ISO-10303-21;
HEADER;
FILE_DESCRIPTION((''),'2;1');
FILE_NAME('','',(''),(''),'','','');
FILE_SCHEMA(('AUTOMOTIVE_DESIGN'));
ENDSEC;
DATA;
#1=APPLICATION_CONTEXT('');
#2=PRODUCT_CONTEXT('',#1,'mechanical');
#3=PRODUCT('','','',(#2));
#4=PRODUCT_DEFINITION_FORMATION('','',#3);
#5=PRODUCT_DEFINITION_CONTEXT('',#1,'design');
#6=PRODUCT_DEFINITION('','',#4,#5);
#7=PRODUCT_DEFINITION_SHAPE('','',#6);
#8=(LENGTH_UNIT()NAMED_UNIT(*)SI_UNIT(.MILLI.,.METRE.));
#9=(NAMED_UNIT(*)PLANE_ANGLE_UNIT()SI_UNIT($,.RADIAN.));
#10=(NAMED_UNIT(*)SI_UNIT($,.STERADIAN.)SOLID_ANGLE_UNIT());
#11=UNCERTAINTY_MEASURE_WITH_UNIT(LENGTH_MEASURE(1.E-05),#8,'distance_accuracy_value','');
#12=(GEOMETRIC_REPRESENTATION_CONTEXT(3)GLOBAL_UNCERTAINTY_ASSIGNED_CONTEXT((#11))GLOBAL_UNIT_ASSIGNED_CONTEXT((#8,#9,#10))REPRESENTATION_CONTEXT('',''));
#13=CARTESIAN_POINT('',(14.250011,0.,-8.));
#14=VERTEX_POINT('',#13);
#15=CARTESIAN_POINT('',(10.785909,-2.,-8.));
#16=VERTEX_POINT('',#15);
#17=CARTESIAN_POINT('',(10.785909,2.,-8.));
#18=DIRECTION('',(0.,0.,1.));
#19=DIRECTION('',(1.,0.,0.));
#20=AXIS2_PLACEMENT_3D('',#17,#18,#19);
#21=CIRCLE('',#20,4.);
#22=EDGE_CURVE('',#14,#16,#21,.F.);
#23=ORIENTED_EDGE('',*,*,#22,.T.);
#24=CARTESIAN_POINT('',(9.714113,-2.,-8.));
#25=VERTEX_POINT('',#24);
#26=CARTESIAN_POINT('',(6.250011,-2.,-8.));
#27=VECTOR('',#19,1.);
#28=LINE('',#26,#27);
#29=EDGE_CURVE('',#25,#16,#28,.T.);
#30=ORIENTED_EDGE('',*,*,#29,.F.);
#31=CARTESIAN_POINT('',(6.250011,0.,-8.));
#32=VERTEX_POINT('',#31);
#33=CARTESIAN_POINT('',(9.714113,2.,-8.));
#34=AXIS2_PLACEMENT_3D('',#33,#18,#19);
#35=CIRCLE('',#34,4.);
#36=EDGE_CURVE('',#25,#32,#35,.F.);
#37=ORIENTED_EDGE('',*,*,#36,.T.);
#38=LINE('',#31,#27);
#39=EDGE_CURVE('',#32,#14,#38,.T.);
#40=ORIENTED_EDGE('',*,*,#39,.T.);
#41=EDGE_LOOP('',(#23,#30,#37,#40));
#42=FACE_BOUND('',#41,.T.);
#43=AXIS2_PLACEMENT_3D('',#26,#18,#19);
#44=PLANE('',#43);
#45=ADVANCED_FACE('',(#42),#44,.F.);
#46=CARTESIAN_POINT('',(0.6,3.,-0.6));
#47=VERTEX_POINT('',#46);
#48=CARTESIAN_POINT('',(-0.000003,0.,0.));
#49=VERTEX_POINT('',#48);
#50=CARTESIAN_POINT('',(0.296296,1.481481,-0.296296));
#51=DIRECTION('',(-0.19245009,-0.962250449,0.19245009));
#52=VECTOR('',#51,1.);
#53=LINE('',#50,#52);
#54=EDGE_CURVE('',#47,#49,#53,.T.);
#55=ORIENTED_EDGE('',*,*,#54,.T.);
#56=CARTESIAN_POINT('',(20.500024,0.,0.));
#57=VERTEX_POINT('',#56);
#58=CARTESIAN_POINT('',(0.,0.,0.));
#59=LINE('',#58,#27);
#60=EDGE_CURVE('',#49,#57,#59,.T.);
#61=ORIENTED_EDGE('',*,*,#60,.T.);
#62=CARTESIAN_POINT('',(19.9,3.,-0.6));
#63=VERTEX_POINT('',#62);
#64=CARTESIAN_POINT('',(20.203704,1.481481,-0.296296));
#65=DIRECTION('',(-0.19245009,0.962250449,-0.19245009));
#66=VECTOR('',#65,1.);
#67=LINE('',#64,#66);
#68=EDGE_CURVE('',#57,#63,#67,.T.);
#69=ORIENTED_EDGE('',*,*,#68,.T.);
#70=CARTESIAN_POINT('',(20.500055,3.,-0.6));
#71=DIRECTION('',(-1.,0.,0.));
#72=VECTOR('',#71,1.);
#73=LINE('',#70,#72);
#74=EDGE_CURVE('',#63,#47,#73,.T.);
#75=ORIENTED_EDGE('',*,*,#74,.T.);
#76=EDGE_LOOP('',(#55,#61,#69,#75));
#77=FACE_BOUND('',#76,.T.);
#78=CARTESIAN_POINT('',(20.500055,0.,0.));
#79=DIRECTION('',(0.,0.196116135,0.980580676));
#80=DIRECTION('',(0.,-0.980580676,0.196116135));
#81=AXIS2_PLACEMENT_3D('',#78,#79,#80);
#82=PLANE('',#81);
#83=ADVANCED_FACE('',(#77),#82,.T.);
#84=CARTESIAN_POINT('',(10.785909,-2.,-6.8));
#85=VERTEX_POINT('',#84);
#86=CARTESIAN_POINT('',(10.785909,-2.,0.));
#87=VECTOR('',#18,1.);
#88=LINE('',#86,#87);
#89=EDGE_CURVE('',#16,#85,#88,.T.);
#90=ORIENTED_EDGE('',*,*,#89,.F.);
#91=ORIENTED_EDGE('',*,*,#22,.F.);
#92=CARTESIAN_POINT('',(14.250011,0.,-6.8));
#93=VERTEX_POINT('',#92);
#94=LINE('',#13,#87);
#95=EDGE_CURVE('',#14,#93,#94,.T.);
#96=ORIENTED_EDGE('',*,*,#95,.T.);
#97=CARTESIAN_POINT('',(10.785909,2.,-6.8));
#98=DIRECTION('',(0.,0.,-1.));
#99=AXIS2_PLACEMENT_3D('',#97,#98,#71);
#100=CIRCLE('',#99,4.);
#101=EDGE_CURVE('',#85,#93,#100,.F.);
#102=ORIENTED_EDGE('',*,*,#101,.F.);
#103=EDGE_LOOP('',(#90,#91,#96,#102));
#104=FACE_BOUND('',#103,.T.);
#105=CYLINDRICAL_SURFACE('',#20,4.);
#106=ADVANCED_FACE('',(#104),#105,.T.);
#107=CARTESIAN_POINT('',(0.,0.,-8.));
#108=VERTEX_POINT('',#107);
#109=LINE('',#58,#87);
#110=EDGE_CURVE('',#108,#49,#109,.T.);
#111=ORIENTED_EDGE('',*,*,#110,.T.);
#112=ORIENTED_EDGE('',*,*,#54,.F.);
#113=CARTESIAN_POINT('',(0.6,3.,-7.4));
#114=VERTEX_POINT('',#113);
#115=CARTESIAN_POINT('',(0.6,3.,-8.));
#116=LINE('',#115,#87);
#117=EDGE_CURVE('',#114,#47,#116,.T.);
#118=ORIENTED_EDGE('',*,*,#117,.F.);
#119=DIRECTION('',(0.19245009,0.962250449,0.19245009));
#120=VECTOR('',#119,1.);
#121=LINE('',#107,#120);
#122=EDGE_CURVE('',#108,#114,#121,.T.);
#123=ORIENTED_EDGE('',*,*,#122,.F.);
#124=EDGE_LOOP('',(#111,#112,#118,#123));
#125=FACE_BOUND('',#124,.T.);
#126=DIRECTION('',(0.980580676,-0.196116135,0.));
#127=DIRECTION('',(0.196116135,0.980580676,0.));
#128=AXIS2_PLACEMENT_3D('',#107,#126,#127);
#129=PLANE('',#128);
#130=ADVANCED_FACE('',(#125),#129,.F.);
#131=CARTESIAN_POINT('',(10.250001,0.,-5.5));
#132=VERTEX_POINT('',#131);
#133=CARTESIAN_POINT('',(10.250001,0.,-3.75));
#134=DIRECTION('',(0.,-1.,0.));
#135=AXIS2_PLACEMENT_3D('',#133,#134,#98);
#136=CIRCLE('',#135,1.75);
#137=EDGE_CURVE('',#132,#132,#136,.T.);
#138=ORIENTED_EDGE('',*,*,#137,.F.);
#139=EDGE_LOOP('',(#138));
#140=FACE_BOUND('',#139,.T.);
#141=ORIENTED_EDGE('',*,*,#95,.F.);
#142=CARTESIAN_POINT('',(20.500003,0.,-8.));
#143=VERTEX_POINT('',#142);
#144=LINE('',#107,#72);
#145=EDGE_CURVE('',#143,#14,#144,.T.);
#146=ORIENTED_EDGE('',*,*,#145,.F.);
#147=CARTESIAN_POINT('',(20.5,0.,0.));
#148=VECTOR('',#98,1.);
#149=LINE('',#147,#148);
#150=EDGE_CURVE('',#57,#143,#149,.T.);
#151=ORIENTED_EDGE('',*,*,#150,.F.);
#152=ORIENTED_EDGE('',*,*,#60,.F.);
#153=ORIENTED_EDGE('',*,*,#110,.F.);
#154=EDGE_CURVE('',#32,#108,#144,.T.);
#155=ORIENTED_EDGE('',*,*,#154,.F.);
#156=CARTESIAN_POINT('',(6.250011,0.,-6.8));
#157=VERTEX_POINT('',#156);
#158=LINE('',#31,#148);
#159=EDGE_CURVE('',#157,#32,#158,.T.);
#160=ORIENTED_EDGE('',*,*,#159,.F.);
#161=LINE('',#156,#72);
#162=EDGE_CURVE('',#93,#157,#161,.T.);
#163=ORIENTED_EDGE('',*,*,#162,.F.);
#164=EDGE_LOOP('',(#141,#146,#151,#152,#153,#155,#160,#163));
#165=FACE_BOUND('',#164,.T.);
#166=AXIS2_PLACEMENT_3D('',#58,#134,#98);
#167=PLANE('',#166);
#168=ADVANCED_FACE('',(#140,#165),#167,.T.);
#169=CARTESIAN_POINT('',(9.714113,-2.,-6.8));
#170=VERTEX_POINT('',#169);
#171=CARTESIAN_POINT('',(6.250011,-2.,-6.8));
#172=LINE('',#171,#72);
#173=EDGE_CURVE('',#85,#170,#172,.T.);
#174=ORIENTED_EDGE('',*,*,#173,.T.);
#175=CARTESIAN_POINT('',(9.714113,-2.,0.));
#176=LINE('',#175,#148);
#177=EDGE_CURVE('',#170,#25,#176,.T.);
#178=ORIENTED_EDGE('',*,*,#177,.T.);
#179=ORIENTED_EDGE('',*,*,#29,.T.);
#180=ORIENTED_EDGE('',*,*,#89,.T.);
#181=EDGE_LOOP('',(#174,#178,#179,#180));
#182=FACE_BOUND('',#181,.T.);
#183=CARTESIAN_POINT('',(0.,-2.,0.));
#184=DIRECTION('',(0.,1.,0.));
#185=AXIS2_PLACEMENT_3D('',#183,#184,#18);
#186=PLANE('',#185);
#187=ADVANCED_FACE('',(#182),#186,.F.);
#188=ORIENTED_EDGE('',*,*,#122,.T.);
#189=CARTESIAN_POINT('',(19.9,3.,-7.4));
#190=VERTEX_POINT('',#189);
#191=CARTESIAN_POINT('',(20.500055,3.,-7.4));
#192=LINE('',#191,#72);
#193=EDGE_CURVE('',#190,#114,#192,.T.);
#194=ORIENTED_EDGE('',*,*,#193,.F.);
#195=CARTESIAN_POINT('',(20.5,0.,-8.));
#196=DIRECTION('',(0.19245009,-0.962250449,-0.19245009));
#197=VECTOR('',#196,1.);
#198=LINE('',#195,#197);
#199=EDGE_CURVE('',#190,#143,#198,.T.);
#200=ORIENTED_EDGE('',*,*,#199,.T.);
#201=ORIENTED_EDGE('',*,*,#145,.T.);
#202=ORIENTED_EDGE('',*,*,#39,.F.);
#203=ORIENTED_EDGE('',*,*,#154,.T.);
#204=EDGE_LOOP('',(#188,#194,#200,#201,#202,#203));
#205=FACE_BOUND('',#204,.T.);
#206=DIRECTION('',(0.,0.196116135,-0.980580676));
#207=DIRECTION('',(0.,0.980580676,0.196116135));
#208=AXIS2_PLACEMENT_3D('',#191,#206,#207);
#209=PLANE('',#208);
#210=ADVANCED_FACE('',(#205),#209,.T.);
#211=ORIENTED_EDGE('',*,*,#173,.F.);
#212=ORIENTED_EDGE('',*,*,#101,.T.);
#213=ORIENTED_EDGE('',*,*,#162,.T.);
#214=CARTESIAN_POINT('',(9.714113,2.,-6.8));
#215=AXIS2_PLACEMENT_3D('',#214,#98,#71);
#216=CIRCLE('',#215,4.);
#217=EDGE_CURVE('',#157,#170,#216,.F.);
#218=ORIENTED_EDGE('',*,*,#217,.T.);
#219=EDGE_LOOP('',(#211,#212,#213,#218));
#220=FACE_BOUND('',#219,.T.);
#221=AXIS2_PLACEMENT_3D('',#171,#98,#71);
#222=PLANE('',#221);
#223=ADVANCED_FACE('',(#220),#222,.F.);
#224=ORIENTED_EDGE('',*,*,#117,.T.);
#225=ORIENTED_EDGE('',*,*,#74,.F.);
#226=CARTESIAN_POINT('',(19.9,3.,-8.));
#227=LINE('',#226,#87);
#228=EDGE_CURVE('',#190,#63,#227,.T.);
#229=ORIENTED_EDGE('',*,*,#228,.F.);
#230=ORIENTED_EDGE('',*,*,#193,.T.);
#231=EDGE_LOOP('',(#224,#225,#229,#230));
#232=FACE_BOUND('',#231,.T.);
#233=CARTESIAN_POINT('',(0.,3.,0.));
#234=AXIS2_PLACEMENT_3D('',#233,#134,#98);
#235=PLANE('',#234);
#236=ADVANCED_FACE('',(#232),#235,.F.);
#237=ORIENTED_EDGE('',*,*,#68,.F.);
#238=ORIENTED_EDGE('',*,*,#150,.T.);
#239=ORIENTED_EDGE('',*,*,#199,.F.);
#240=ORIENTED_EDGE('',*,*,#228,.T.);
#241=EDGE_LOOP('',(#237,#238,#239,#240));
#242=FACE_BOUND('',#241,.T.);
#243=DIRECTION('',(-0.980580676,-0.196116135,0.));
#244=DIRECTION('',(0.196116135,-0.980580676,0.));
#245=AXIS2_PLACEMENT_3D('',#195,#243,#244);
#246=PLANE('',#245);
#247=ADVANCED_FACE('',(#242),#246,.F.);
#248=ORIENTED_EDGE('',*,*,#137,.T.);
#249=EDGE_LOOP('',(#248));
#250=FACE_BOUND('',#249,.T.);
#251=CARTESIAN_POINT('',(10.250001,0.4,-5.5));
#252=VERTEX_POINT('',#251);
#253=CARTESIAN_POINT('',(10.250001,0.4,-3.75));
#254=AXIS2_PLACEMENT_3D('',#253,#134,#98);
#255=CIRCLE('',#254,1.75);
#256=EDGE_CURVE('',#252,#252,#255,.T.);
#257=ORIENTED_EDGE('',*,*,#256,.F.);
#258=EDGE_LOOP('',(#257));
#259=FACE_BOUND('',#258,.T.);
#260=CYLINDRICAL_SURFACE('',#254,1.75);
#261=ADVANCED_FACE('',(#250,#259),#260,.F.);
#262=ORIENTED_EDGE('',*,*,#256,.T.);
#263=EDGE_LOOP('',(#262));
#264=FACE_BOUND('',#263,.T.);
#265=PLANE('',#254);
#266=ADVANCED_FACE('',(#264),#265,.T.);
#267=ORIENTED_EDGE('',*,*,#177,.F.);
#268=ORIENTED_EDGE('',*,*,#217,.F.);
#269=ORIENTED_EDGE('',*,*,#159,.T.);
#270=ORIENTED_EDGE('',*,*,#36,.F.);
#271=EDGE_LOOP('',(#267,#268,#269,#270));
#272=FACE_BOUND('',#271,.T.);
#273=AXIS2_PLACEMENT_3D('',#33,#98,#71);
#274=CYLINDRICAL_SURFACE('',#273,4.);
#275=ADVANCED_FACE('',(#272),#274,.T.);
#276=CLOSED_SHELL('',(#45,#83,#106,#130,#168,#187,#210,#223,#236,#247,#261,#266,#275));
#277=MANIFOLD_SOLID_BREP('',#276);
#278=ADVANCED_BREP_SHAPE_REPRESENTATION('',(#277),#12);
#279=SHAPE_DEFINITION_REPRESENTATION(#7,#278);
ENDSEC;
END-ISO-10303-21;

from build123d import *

# Parameters (mm, degrees)
SKETCH1_W               = 20.5
SKETCH1_H               = 8
BOSS_EXTRUDE1_DEPTH     = 3
CUT_EXTRUDE1_DEPTH      = 23.209232315
CUT_EXTRUDE1_DEPTH_BACK = 23.209232315
CUT_EXTRUDE2_DEPTH      = 23.209232315
CUT_EXTRUDE2_DEPTH_BACK = 23.209232315
SKETCH4_R               = 1.75
CUT_EXTRUDE3_DEPTH      = 0.4
SKETCH5_W               = 8
SKETCH5_H               = 1.2
BOSS_EXTRUDE2_DEPTH     = 2
FILLET1_R               = 4


with BuildPart() as part:
    # Sketch1 → Boss-Extrude1 (new body)
    with BuildSketch(Plane(origin=(0, 0, 0), x_dir=(1, 0, 0), z_dir=(0, 1, 0))):
        with Locations((10.25, 4)):
            Rectangle(SKETCH1_W, SKETCH1_H)
    extrude(amount=BOSS_EXTRUDE1_DEPTH)

    # Sketch2 → Cut-Extrude1 (cut, two sides: drawn at the far end of the back side and taken through both)
    with BuildSketch(Plane.XY.offset(-CUT_EXTRUDE1_DEPTH_BACK)):
        Polygon((0, 0), (0.6, 3), (0, 3), align=None)
        Polygon((20.5, 0), (19.9, 3), (20.5, 3), align=None)
    extrude(amount=CUT_EXTRUDE1_DEPTH + CUT_EXTRUDE1_DEPTH_BACK, mode=Mode.SUBTRACT)

    # Sketch3 → Cut-Extrude2 (cut, two sides: drawn at the far end of the back side and taken through both)
    with BuildSketch(Plane(origin=(0, 0, 0), x_dir=(0, 0, -1), z_dir=(1, 0, 0)).offset(-CUT_EXTRUDE2_DEPTH_BACK)):
        Polygon((0, 0), (0.6, 3), (0, 3), align=None)
        Polygon((8, 3), (7.4, 3), (8, 0), align=None)
    extrude(amount=CUT_EXTRUDE2_DEPTH + CUT_EXTRUDE2_DEPTH_BACK, mode=Mode.SUBTRACT)

    # Sketch4 → Cut-Extrude3 (cut)
    with BuildSketch(Plane.XZ):
        with Locations(Location((10.25000125, -3.75, 0), (0, 0, 270))):
            Circle(SKETCH4_R)
    extrude(amount=-CUT_EXTRUDE3_DEPTH, mode=Mode.SUBTRACT)

    # Sketch5 → Boss-Extrude2 (add)
    with BuildSketch(Plane.XZ):
        with Locations((10.250011, -7.4)):
            Rectangle(SKETCH5_W, SKETCH5_H)
    extrude(amount=BOSS_EXTRUDE2_DEPTH)

    # Fillet1
    # the kernel refuses this fillet: 4 mm, written as the material it takes off along each edge
    with BuildSketch(Plane(origin=(14.250011, -2, -16.660254038), x_dir=(0, 1, 0), z_dir=(0, 0, 1)), Plane(origin=(6.250011, -2, 1.860254038), x_dir=(0, 1, 0), z_dir=(0, 0, -1))) as fillet1_piece_1:
        with BuildLine():
            CenterArc((4, 3.464101615), FILLET1_R, 180, 60)
            Line((0, 3.464101615), (-0.08, 3.464101615))
            Line((-0.08, 3.464101615), (-0.08, 0))
            Line((-0.08, 0), (0, -0.08))
            ThreePointArc((0, -0.08), (1, -0.08), (1.96, -0.069282032))
            Line((1.96, -0.069282032), (2, 0))
        make_face()
    extrude(amount=18.520508076, mode=Mode.SUBTRACT)


solid = part.part
